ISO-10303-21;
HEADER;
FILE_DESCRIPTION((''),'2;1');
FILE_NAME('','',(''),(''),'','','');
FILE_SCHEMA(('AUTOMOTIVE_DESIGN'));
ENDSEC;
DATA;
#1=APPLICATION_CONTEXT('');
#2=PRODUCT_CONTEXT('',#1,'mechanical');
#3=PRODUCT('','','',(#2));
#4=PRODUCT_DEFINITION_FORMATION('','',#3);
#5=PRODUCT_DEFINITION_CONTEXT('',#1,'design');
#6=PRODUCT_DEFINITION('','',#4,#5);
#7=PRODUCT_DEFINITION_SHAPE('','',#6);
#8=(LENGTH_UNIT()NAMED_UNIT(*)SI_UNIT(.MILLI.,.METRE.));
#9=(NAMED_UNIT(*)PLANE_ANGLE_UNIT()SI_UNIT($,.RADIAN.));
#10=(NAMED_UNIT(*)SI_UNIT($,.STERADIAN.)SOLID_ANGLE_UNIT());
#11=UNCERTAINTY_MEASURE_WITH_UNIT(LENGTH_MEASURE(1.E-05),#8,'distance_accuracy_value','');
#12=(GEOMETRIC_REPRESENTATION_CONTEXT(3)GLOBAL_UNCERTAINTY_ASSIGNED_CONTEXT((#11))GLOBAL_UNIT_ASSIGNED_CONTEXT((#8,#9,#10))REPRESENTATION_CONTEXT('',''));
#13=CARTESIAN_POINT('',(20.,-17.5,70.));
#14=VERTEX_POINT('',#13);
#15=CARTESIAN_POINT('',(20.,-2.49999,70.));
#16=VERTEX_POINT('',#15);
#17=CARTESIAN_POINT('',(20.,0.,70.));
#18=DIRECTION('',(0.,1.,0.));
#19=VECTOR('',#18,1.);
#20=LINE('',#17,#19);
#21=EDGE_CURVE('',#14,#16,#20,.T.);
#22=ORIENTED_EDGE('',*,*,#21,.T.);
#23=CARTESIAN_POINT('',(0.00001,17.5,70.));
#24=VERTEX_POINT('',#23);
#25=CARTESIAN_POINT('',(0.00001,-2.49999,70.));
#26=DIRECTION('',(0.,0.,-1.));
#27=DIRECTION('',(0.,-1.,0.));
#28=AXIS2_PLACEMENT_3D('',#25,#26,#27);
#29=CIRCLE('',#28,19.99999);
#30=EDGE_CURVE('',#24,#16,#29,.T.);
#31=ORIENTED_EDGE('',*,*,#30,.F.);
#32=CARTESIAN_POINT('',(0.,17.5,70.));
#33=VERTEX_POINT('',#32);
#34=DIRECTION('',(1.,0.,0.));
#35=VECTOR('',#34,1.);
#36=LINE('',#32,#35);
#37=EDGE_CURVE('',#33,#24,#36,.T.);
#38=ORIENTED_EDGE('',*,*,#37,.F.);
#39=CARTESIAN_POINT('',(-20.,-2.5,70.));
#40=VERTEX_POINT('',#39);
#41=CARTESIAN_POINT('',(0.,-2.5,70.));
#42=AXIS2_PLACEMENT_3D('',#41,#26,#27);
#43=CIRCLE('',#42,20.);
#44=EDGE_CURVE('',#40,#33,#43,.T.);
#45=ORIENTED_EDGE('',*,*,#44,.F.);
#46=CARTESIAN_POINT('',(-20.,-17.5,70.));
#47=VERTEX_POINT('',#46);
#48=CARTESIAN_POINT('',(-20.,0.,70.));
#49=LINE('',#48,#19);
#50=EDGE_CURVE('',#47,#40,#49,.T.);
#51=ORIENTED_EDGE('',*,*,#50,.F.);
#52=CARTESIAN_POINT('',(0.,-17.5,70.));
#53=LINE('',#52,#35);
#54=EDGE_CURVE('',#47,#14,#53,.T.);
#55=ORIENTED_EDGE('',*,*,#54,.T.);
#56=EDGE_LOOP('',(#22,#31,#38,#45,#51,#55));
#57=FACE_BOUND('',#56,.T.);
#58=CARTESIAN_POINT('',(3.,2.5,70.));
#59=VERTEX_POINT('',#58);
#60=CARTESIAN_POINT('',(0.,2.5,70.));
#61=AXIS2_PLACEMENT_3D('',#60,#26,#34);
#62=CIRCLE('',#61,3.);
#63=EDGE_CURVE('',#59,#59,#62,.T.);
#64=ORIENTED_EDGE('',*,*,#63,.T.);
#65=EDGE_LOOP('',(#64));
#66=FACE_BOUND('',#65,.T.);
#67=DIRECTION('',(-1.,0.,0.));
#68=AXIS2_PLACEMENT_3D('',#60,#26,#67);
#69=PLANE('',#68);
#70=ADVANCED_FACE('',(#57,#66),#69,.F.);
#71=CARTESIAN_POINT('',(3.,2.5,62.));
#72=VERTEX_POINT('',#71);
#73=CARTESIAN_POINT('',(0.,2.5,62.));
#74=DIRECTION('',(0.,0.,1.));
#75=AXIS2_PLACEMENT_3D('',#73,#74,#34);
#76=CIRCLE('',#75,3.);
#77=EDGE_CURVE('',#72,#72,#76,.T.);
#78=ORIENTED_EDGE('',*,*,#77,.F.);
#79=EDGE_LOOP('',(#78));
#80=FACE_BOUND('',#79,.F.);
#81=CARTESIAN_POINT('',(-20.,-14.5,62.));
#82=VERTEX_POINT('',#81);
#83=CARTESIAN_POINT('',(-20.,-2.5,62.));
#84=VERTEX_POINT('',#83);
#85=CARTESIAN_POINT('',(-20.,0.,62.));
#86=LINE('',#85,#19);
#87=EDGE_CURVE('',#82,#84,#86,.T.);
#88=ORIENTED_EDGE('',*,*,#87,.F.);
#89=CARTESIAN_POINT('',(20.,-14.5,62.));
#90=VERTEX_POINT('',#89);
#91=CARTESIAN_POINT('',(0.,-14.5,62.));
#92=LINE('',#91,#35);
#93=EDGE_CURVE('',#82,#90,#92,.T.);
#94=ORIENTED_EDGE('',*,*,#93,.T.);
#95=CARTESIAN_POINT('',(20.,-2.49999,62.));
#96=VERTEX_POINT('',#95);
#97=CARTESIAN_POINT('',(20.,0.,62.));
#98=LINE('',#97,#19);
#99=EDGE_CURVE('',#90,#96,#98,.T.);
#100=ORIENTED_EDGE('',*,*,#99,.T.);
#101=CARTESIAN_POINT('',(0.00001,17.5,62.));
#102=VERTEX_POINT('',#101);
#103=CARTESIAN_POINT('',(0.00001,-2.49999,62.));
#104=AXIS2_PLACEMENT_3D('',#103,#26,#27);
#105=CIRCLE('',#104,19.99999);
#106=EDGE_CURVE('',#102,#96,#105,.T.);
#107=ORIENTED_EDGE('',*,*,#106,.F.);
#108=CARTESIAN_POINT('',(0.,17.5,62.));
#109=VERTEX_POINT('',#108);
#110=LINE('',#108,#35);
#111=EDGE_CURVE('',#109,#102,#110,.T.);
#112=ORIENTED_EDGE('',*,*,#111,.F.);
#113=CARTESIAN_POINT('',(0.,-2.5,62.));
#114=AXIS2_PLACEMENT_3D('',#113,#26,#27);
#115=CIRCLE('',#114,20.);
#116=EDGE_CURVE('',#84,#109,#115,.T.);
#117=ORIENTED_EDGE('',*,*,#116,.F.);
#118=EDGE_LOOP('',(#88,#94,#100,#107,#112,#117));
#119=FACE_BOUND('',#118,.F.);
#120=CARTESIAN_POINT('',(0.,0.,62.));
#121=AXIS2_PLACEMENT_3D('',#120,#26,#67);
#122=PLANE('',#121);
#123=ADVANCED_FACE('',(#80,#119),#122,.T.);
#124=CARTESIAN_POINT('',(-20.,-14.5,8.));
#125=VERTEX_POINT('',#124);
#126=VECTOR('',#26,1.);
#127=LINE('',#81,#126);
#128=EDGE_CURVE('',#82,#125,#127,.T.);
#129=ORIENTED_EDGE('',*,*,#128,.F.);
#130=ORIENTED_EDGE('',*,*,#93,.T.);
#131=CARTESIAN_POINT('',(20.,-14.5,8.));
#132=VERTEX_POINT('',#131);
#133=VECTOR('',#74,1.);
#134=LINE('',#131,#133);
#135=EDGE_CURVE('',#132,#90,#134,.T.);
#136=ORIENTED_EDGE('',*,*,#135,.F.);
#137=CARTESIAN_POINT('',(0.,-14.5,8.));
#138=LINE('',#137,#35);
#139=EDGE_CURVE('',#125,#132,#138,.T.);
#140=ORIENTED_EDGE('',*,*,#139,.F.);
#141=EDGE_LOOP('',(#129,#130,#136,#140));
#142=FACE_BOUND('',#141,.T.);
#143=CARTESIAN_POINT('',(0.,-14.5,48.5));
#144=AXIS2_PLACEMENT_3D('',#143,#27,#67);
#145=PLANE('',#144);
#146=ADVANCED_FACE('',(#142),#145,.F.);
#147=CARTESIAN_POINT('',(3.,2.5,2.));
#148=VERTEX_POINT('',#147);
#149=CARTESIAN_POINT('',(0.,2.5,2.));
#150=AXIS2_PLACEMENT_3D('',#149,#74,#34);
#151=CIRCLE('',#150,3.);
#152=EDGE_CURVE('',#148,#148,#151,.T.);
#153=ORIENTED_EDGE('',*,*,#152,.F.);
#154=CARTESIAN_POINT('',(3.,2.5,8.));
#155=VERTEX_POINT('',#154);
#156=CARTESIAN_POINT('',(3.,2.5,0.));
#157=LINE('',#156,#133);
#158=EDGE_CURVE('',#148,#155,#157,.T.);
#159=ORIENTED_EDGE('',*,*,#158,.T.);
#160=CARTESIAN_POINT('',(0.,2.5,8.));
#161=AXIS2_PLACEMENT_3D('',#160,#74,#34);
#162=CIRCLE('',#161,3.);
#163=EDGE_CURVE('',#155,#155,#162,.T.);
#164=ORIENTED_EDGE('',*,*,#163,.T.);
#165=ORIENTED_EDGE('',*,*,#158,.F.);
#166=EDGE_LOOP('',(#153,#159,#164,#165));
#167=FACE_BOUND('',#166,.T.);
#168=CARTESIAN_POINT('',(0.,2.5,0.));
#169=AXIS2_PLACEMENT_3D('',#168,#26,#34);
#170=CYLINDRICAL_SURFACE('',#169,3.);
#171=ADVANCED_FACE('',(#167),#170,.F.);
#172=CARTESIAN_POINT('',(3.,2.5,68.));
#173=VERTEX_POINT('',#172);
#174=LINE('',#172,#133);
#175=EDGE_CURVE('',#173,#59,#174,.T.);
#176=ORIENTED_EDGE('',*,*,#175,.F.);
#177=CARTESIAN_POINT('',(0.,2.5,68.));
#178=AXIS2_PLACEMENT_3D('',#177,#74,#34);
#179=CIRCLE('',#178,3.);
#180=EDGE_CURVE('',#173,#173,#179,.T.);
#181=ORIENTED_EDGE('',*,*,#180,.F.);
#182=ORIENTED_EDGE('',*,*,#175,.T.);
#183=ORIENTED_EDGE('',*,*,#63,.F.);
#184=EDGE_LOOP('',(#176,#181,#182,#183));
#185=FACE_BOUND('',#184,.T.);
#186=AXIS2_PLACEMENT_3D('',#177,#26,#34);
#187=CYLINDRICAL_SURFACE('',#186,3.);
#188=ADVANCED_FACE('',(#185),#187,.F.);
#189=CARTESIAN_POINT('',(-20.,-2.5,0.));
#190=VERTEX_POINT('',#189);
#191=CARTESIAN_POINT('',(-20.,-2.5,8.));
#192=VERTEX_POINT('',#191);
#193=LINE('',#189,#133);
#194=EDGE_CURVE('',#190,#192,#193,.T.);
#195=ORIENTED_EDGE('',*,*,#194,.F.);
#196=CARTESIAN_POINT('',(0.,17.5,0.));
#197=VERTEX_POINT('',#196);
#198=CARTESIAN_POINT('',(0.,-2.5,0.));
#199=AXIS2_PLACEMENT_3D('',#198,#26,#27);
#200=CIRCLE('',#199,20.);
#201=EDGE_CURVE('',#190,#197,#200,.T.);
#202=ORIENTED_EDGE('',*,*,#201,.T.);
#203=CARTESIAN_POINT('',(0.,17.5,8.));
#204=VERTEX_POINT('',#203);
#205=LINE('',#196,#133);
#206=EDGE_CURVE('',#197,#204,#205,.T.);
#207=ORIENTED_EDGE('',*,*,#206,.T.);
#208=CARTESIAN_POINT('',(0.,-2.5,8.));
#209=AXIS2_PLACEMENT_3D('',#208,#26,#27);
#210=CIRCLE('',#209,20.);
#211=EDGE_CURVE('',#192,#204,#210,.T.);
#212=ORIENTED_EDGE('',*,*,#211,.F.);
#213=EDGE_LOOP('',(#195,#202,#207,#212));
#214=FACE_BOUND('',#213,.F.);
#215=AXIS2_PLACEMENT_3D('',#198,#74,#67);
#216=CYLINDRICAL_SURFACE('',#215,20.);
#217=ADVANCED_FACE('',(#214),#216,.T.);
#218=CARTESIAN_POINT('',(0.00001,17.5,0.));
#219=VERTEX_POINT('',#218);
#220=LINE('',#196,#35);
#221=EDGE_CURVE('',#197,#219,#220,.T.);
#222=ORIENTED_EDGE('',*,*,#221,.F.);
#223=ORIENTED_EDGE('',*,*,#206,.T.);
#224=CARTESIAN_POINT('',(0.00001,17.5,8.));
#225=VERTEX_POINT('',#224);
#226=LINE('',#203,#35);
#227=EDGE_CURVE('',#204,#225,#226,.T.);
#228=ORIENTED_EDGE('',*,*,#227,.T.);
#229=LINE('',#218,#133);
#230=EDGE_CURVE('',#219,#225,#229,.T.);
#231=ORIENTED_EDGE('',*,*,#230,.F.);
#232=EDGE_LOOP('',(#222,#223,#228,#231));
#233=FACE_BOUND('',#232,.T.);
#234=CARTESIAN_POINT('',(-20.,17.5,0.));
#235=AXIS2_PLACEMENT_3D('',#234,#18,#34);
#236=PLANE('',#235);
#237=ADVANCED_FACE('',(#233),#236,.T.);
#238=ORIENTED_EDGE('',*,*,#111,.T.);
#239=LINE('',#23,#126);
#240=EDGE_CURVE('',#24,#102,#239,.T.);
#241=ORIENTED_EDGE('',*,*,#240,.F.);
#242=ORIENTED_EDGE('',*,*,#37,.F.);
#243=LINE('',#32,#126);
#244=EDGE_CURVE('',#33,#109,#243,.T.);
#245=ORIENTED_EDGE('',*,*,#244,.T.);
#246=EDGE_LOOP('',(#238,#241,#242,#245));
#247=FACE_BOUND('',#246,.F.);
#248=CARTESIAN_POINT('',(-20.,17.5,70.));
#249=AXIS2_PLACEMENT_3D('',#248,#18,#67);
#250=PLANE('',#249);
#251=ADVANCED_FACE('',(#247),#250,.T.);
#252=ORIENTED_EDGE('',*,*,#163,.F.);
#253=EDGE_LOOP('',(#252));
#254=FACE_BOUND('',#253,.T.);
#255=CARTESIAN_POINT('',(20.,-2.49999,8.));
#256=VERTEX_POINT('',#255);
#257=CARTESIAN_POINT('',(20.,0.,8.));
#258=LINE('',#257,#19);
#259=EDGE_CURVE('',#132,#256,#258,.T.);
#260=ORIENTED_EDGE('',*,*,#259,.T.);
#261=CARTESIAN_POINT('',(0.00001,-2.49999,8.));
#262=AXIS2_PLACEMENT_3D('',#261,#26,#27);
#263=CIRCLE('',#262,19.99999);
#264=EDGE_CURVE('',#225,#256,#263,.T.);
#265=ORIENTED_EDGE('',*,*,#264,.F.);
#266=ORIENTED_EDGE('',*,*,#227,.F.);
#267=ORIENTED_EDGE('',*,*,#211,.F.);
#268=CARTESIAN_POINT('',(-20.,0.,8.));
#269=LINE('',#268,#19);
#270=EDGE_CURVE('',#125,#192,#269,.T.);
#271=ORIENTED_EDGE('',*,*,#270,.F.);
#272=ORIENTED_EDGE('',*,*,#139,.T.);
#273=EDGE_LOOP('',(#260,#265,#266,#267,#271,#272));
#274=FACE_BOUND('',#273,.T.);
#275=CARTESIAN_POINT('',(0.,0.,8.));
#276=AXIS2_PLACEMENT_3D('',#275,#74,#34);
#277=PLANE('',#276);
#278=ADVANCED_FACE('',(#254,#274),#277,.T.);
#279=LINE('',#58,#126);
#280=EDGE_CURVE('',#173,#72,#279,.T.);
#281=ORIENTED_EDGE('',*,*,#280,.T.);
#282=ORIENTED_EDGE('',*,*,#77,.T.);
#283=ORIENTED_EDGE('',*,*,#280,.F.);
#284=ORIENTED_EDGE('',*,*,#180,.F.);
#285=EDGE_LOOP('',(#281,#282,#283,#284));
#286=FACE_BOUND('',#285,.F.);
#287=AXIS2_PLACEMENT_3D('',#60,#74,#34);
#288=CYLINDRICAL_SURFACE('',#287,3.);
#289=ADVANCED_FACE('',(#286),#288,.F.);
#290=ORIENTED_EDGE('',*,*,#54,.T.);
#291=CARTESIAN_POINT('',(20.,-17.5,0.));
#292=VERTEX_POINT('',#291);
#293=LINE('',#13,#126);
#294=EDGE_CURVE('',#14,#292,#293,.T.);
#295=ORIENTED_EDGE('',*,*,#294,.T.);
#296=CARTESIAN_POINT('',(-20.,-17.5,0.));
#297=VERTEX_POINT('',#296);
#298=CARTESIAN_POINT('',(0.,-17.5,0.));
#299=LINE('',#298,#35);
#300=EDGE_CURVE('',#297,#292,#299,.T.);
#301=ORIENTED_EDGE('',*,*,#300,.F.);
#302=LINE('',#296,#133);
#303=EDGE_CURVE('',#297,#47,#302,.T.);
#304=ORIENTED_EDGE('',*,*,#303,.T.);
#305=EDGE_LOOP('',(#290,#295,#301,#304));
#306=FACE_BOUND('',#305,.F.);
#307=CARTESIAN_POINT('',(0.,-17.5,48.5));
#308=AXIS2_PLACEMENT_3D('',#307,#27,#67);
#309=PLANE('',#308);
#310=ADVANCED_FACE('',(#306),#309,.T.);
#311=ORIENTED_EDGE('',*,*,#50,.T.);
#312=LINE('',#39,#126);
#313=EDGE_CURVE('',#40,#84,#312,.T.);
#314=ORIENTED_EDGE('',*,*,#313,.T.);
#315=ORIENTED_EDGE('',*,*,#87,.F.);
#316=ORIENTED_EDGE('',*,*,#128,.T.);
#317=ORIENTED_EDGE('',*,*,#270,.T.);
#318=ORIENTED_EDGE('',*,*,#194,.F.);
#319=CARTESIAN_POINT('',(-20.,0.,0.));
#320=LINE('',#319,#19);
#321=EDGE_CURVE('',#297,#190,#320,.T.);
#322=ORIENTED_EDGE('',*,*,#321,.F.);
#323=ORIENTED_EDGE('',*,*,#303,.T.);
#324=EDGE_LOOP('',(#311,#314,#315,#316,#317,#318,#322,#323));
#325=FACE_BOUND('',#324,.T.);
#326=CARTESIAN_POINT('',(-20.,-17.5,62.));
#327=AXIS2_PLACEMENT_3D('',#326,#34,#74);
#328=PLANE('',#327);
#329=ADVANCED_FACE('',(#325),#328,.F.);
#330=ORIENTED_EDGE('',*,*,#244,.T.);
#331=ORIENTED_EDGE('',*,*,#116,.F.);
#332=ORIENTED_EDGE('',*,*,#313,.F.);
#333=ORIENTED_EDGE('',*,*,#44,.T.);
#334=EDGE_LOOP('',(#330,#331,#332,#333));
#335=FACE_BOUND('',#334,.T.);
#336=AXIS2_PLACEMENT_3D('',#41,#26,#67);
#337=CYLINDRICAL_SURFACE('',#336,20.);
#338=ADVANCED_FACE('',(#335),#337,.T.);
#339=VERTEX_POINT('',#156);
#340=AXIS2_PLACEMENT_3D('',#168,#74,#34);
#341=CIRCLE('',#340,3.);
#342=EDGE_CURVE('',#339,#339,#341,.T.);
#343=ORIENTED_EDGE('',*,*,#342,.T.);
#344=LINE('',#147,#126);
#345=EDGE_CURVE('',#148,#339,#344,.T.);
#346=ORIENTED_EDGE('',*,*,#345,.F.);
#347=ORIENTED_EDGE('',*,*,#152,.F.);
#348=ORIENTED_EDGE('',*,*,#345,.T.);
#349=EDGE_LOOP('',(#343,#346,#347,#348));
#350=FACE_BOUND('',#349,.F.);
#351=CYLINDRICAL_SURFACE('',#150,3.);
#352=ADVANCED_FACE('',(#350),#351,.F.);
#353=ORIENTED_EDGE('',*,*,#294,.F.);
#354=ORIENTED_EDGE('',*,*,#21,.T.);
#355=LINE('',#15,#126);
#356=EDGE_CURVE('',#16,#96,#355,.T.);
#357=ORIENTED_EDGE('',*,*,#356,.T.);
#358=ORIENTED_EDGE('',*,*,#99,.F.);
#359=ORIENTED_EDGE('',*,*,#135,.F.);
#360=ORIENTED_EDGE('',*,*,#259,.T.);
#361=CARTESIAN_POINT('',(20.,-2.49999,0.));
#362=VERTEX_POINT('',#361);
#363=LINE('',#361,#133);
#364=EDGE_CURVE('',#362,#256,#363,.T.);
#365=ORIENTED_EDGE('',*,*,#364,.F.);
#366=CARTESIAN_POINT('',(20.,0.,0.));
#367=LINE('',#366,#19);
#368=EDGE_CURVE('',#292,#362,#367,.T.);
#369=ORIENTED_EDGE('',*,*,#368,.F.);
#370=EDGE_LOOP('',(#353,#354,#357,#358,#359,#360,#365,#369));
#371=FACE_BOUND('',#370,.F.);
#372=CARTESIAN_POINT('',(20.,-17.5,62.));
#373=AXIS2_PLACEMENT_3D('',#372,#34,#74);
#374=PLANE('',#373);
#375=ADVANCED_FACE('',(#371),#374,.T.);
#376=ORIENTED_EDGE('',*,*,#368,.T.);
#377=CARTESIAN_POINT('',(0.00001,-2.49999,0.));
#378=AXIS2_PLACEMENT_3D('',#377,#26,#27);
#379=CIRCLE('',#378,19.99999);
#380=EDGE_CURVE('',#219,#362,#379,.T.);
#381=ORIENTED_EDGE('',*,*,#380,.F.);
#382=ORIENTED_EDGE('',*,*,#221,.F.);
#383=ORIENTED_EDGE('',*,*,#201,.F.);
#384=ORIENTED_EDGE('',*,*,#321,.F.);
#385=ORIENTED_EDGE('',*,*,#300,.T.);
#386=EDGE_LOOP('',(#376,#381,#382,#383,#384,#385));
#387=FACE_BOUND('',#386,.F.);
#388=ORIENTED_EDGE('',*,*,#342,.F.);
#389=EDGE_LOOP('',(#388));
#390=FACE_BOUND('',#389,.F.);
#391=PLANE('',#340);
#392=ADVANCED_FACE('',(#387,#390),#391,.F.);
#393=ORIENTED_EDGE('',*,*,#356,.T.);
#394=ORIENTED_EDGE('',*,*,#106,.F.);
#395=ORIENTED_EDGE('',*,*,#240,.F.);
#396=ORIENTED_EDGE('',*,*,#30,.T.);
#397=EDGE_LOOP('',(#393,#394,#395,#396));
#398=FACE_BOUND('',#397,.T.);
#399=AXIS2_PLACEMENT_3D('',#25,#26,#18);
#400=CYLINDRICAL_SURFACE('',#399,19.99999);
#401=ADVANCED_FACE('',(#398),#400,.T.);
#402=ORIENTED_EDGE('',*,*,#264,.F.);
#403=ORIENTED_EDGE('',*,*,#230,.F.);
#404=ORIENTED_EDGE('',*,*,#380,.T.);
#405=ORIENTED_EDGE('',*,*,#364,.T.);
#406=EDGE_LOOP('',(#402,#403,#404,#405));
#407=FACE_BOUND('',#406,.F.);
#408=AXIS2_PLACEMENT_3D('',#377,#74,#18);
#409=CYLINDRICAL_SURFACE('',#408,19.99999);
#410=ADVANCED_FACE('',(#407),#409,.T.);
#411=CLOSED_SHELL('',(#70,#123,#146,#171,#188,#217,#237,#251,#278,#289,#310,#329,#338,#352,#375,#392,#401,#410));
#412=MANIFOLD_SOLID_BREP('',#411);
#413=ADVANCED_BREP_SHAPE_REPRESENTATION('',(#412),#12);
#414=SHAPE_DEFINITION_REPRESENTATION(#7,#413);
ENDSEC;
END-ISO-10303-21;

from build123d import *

# Parameters (mm, degrees)
F0_W     = 40
F0_H     = 35
F0_R     = 3
F1_DEPTH = 8
F2_DEPTH = 2
F3_W     = 40
F3_H     = 27
F4_DEPTH = 3
F5_R     = 20
F6_R     = 19.99999
F8_DEPTH = 2.001
F9_DEPTH = 2.001


# Not quite as in the source:
# - a fillet or chamfer is up to 0.001 mm smaller than in the source, because OpenCascade refuses the exact size


with BuildPart() as f1:
    # F0 (on Top) → F1 (new body)
    with BuildSketch(Plane.XY):
        Rectangle(F0_W, F0_H)
        with Locations((0, 2.5)):
            Circle(F0_R, mode=Mode.SUBTRACT)
    extrude(amount=F1_DEPTH)

    # F0 (on Top) → F2 (join)
    with BuildSketch(Plane.XY):
        with Locations((0, 2.5)):
            Circle(F0_R)
    extrude(amount=F2_DEPTH)

    # F3 (on face) → F4 (join)
    with BuildSketch(Plane.XZ.offset(17.5)):
        with Locations((0, 21.5)):
            Rectangle(F3_W, F3_H)
    extrude(amount=-F4_DEPTH)

    # F5
    f5_edges = [f1.edges().sort_by_distance(p)[0] for p in [
        (-20, 17.5, 4),
    ]]
    fillet(f5_edges, radius=F5_R)

    # F6 (radius 20 in the source; OpenCascade refuses exactly that, so slightly less here)
    f6_edges = [f1.edges().sort_by_distance(p)[0] for p in [
        (20, 17.5, 4),
    ]]
    fillet(f6_edges, radius=F6_R)

    # F7: F1 across face


with BuildPart() as f1_1:
    add(f1.part)
    add(f1.part.mirror(Plane(origin=(0, -16, 35), x_dir=(1, 0, 0), z_dir=(0, 0, 1))))

    # F8 (cut, through all): a face of the model
    f8_faces = [f1_1.faces().sort_by_distance(p)[0] for p in [
        (0, 2.5, 2),
    ]]
    extrude(f8_faces, amount=-F8_DEPTH, mode=Mode.SUBTRACT)

    # F9 (cut, through all): a face of the model
    f9_faces = [f1_1.faces().sort_by_distance(p)[0] for p in [
        (0, 2.5, 68),
    ]]
    extrude(f9_faces, amount=-F9_DEPTH, mode=Mode.SUBTRACT)


solid = f1_1.part
